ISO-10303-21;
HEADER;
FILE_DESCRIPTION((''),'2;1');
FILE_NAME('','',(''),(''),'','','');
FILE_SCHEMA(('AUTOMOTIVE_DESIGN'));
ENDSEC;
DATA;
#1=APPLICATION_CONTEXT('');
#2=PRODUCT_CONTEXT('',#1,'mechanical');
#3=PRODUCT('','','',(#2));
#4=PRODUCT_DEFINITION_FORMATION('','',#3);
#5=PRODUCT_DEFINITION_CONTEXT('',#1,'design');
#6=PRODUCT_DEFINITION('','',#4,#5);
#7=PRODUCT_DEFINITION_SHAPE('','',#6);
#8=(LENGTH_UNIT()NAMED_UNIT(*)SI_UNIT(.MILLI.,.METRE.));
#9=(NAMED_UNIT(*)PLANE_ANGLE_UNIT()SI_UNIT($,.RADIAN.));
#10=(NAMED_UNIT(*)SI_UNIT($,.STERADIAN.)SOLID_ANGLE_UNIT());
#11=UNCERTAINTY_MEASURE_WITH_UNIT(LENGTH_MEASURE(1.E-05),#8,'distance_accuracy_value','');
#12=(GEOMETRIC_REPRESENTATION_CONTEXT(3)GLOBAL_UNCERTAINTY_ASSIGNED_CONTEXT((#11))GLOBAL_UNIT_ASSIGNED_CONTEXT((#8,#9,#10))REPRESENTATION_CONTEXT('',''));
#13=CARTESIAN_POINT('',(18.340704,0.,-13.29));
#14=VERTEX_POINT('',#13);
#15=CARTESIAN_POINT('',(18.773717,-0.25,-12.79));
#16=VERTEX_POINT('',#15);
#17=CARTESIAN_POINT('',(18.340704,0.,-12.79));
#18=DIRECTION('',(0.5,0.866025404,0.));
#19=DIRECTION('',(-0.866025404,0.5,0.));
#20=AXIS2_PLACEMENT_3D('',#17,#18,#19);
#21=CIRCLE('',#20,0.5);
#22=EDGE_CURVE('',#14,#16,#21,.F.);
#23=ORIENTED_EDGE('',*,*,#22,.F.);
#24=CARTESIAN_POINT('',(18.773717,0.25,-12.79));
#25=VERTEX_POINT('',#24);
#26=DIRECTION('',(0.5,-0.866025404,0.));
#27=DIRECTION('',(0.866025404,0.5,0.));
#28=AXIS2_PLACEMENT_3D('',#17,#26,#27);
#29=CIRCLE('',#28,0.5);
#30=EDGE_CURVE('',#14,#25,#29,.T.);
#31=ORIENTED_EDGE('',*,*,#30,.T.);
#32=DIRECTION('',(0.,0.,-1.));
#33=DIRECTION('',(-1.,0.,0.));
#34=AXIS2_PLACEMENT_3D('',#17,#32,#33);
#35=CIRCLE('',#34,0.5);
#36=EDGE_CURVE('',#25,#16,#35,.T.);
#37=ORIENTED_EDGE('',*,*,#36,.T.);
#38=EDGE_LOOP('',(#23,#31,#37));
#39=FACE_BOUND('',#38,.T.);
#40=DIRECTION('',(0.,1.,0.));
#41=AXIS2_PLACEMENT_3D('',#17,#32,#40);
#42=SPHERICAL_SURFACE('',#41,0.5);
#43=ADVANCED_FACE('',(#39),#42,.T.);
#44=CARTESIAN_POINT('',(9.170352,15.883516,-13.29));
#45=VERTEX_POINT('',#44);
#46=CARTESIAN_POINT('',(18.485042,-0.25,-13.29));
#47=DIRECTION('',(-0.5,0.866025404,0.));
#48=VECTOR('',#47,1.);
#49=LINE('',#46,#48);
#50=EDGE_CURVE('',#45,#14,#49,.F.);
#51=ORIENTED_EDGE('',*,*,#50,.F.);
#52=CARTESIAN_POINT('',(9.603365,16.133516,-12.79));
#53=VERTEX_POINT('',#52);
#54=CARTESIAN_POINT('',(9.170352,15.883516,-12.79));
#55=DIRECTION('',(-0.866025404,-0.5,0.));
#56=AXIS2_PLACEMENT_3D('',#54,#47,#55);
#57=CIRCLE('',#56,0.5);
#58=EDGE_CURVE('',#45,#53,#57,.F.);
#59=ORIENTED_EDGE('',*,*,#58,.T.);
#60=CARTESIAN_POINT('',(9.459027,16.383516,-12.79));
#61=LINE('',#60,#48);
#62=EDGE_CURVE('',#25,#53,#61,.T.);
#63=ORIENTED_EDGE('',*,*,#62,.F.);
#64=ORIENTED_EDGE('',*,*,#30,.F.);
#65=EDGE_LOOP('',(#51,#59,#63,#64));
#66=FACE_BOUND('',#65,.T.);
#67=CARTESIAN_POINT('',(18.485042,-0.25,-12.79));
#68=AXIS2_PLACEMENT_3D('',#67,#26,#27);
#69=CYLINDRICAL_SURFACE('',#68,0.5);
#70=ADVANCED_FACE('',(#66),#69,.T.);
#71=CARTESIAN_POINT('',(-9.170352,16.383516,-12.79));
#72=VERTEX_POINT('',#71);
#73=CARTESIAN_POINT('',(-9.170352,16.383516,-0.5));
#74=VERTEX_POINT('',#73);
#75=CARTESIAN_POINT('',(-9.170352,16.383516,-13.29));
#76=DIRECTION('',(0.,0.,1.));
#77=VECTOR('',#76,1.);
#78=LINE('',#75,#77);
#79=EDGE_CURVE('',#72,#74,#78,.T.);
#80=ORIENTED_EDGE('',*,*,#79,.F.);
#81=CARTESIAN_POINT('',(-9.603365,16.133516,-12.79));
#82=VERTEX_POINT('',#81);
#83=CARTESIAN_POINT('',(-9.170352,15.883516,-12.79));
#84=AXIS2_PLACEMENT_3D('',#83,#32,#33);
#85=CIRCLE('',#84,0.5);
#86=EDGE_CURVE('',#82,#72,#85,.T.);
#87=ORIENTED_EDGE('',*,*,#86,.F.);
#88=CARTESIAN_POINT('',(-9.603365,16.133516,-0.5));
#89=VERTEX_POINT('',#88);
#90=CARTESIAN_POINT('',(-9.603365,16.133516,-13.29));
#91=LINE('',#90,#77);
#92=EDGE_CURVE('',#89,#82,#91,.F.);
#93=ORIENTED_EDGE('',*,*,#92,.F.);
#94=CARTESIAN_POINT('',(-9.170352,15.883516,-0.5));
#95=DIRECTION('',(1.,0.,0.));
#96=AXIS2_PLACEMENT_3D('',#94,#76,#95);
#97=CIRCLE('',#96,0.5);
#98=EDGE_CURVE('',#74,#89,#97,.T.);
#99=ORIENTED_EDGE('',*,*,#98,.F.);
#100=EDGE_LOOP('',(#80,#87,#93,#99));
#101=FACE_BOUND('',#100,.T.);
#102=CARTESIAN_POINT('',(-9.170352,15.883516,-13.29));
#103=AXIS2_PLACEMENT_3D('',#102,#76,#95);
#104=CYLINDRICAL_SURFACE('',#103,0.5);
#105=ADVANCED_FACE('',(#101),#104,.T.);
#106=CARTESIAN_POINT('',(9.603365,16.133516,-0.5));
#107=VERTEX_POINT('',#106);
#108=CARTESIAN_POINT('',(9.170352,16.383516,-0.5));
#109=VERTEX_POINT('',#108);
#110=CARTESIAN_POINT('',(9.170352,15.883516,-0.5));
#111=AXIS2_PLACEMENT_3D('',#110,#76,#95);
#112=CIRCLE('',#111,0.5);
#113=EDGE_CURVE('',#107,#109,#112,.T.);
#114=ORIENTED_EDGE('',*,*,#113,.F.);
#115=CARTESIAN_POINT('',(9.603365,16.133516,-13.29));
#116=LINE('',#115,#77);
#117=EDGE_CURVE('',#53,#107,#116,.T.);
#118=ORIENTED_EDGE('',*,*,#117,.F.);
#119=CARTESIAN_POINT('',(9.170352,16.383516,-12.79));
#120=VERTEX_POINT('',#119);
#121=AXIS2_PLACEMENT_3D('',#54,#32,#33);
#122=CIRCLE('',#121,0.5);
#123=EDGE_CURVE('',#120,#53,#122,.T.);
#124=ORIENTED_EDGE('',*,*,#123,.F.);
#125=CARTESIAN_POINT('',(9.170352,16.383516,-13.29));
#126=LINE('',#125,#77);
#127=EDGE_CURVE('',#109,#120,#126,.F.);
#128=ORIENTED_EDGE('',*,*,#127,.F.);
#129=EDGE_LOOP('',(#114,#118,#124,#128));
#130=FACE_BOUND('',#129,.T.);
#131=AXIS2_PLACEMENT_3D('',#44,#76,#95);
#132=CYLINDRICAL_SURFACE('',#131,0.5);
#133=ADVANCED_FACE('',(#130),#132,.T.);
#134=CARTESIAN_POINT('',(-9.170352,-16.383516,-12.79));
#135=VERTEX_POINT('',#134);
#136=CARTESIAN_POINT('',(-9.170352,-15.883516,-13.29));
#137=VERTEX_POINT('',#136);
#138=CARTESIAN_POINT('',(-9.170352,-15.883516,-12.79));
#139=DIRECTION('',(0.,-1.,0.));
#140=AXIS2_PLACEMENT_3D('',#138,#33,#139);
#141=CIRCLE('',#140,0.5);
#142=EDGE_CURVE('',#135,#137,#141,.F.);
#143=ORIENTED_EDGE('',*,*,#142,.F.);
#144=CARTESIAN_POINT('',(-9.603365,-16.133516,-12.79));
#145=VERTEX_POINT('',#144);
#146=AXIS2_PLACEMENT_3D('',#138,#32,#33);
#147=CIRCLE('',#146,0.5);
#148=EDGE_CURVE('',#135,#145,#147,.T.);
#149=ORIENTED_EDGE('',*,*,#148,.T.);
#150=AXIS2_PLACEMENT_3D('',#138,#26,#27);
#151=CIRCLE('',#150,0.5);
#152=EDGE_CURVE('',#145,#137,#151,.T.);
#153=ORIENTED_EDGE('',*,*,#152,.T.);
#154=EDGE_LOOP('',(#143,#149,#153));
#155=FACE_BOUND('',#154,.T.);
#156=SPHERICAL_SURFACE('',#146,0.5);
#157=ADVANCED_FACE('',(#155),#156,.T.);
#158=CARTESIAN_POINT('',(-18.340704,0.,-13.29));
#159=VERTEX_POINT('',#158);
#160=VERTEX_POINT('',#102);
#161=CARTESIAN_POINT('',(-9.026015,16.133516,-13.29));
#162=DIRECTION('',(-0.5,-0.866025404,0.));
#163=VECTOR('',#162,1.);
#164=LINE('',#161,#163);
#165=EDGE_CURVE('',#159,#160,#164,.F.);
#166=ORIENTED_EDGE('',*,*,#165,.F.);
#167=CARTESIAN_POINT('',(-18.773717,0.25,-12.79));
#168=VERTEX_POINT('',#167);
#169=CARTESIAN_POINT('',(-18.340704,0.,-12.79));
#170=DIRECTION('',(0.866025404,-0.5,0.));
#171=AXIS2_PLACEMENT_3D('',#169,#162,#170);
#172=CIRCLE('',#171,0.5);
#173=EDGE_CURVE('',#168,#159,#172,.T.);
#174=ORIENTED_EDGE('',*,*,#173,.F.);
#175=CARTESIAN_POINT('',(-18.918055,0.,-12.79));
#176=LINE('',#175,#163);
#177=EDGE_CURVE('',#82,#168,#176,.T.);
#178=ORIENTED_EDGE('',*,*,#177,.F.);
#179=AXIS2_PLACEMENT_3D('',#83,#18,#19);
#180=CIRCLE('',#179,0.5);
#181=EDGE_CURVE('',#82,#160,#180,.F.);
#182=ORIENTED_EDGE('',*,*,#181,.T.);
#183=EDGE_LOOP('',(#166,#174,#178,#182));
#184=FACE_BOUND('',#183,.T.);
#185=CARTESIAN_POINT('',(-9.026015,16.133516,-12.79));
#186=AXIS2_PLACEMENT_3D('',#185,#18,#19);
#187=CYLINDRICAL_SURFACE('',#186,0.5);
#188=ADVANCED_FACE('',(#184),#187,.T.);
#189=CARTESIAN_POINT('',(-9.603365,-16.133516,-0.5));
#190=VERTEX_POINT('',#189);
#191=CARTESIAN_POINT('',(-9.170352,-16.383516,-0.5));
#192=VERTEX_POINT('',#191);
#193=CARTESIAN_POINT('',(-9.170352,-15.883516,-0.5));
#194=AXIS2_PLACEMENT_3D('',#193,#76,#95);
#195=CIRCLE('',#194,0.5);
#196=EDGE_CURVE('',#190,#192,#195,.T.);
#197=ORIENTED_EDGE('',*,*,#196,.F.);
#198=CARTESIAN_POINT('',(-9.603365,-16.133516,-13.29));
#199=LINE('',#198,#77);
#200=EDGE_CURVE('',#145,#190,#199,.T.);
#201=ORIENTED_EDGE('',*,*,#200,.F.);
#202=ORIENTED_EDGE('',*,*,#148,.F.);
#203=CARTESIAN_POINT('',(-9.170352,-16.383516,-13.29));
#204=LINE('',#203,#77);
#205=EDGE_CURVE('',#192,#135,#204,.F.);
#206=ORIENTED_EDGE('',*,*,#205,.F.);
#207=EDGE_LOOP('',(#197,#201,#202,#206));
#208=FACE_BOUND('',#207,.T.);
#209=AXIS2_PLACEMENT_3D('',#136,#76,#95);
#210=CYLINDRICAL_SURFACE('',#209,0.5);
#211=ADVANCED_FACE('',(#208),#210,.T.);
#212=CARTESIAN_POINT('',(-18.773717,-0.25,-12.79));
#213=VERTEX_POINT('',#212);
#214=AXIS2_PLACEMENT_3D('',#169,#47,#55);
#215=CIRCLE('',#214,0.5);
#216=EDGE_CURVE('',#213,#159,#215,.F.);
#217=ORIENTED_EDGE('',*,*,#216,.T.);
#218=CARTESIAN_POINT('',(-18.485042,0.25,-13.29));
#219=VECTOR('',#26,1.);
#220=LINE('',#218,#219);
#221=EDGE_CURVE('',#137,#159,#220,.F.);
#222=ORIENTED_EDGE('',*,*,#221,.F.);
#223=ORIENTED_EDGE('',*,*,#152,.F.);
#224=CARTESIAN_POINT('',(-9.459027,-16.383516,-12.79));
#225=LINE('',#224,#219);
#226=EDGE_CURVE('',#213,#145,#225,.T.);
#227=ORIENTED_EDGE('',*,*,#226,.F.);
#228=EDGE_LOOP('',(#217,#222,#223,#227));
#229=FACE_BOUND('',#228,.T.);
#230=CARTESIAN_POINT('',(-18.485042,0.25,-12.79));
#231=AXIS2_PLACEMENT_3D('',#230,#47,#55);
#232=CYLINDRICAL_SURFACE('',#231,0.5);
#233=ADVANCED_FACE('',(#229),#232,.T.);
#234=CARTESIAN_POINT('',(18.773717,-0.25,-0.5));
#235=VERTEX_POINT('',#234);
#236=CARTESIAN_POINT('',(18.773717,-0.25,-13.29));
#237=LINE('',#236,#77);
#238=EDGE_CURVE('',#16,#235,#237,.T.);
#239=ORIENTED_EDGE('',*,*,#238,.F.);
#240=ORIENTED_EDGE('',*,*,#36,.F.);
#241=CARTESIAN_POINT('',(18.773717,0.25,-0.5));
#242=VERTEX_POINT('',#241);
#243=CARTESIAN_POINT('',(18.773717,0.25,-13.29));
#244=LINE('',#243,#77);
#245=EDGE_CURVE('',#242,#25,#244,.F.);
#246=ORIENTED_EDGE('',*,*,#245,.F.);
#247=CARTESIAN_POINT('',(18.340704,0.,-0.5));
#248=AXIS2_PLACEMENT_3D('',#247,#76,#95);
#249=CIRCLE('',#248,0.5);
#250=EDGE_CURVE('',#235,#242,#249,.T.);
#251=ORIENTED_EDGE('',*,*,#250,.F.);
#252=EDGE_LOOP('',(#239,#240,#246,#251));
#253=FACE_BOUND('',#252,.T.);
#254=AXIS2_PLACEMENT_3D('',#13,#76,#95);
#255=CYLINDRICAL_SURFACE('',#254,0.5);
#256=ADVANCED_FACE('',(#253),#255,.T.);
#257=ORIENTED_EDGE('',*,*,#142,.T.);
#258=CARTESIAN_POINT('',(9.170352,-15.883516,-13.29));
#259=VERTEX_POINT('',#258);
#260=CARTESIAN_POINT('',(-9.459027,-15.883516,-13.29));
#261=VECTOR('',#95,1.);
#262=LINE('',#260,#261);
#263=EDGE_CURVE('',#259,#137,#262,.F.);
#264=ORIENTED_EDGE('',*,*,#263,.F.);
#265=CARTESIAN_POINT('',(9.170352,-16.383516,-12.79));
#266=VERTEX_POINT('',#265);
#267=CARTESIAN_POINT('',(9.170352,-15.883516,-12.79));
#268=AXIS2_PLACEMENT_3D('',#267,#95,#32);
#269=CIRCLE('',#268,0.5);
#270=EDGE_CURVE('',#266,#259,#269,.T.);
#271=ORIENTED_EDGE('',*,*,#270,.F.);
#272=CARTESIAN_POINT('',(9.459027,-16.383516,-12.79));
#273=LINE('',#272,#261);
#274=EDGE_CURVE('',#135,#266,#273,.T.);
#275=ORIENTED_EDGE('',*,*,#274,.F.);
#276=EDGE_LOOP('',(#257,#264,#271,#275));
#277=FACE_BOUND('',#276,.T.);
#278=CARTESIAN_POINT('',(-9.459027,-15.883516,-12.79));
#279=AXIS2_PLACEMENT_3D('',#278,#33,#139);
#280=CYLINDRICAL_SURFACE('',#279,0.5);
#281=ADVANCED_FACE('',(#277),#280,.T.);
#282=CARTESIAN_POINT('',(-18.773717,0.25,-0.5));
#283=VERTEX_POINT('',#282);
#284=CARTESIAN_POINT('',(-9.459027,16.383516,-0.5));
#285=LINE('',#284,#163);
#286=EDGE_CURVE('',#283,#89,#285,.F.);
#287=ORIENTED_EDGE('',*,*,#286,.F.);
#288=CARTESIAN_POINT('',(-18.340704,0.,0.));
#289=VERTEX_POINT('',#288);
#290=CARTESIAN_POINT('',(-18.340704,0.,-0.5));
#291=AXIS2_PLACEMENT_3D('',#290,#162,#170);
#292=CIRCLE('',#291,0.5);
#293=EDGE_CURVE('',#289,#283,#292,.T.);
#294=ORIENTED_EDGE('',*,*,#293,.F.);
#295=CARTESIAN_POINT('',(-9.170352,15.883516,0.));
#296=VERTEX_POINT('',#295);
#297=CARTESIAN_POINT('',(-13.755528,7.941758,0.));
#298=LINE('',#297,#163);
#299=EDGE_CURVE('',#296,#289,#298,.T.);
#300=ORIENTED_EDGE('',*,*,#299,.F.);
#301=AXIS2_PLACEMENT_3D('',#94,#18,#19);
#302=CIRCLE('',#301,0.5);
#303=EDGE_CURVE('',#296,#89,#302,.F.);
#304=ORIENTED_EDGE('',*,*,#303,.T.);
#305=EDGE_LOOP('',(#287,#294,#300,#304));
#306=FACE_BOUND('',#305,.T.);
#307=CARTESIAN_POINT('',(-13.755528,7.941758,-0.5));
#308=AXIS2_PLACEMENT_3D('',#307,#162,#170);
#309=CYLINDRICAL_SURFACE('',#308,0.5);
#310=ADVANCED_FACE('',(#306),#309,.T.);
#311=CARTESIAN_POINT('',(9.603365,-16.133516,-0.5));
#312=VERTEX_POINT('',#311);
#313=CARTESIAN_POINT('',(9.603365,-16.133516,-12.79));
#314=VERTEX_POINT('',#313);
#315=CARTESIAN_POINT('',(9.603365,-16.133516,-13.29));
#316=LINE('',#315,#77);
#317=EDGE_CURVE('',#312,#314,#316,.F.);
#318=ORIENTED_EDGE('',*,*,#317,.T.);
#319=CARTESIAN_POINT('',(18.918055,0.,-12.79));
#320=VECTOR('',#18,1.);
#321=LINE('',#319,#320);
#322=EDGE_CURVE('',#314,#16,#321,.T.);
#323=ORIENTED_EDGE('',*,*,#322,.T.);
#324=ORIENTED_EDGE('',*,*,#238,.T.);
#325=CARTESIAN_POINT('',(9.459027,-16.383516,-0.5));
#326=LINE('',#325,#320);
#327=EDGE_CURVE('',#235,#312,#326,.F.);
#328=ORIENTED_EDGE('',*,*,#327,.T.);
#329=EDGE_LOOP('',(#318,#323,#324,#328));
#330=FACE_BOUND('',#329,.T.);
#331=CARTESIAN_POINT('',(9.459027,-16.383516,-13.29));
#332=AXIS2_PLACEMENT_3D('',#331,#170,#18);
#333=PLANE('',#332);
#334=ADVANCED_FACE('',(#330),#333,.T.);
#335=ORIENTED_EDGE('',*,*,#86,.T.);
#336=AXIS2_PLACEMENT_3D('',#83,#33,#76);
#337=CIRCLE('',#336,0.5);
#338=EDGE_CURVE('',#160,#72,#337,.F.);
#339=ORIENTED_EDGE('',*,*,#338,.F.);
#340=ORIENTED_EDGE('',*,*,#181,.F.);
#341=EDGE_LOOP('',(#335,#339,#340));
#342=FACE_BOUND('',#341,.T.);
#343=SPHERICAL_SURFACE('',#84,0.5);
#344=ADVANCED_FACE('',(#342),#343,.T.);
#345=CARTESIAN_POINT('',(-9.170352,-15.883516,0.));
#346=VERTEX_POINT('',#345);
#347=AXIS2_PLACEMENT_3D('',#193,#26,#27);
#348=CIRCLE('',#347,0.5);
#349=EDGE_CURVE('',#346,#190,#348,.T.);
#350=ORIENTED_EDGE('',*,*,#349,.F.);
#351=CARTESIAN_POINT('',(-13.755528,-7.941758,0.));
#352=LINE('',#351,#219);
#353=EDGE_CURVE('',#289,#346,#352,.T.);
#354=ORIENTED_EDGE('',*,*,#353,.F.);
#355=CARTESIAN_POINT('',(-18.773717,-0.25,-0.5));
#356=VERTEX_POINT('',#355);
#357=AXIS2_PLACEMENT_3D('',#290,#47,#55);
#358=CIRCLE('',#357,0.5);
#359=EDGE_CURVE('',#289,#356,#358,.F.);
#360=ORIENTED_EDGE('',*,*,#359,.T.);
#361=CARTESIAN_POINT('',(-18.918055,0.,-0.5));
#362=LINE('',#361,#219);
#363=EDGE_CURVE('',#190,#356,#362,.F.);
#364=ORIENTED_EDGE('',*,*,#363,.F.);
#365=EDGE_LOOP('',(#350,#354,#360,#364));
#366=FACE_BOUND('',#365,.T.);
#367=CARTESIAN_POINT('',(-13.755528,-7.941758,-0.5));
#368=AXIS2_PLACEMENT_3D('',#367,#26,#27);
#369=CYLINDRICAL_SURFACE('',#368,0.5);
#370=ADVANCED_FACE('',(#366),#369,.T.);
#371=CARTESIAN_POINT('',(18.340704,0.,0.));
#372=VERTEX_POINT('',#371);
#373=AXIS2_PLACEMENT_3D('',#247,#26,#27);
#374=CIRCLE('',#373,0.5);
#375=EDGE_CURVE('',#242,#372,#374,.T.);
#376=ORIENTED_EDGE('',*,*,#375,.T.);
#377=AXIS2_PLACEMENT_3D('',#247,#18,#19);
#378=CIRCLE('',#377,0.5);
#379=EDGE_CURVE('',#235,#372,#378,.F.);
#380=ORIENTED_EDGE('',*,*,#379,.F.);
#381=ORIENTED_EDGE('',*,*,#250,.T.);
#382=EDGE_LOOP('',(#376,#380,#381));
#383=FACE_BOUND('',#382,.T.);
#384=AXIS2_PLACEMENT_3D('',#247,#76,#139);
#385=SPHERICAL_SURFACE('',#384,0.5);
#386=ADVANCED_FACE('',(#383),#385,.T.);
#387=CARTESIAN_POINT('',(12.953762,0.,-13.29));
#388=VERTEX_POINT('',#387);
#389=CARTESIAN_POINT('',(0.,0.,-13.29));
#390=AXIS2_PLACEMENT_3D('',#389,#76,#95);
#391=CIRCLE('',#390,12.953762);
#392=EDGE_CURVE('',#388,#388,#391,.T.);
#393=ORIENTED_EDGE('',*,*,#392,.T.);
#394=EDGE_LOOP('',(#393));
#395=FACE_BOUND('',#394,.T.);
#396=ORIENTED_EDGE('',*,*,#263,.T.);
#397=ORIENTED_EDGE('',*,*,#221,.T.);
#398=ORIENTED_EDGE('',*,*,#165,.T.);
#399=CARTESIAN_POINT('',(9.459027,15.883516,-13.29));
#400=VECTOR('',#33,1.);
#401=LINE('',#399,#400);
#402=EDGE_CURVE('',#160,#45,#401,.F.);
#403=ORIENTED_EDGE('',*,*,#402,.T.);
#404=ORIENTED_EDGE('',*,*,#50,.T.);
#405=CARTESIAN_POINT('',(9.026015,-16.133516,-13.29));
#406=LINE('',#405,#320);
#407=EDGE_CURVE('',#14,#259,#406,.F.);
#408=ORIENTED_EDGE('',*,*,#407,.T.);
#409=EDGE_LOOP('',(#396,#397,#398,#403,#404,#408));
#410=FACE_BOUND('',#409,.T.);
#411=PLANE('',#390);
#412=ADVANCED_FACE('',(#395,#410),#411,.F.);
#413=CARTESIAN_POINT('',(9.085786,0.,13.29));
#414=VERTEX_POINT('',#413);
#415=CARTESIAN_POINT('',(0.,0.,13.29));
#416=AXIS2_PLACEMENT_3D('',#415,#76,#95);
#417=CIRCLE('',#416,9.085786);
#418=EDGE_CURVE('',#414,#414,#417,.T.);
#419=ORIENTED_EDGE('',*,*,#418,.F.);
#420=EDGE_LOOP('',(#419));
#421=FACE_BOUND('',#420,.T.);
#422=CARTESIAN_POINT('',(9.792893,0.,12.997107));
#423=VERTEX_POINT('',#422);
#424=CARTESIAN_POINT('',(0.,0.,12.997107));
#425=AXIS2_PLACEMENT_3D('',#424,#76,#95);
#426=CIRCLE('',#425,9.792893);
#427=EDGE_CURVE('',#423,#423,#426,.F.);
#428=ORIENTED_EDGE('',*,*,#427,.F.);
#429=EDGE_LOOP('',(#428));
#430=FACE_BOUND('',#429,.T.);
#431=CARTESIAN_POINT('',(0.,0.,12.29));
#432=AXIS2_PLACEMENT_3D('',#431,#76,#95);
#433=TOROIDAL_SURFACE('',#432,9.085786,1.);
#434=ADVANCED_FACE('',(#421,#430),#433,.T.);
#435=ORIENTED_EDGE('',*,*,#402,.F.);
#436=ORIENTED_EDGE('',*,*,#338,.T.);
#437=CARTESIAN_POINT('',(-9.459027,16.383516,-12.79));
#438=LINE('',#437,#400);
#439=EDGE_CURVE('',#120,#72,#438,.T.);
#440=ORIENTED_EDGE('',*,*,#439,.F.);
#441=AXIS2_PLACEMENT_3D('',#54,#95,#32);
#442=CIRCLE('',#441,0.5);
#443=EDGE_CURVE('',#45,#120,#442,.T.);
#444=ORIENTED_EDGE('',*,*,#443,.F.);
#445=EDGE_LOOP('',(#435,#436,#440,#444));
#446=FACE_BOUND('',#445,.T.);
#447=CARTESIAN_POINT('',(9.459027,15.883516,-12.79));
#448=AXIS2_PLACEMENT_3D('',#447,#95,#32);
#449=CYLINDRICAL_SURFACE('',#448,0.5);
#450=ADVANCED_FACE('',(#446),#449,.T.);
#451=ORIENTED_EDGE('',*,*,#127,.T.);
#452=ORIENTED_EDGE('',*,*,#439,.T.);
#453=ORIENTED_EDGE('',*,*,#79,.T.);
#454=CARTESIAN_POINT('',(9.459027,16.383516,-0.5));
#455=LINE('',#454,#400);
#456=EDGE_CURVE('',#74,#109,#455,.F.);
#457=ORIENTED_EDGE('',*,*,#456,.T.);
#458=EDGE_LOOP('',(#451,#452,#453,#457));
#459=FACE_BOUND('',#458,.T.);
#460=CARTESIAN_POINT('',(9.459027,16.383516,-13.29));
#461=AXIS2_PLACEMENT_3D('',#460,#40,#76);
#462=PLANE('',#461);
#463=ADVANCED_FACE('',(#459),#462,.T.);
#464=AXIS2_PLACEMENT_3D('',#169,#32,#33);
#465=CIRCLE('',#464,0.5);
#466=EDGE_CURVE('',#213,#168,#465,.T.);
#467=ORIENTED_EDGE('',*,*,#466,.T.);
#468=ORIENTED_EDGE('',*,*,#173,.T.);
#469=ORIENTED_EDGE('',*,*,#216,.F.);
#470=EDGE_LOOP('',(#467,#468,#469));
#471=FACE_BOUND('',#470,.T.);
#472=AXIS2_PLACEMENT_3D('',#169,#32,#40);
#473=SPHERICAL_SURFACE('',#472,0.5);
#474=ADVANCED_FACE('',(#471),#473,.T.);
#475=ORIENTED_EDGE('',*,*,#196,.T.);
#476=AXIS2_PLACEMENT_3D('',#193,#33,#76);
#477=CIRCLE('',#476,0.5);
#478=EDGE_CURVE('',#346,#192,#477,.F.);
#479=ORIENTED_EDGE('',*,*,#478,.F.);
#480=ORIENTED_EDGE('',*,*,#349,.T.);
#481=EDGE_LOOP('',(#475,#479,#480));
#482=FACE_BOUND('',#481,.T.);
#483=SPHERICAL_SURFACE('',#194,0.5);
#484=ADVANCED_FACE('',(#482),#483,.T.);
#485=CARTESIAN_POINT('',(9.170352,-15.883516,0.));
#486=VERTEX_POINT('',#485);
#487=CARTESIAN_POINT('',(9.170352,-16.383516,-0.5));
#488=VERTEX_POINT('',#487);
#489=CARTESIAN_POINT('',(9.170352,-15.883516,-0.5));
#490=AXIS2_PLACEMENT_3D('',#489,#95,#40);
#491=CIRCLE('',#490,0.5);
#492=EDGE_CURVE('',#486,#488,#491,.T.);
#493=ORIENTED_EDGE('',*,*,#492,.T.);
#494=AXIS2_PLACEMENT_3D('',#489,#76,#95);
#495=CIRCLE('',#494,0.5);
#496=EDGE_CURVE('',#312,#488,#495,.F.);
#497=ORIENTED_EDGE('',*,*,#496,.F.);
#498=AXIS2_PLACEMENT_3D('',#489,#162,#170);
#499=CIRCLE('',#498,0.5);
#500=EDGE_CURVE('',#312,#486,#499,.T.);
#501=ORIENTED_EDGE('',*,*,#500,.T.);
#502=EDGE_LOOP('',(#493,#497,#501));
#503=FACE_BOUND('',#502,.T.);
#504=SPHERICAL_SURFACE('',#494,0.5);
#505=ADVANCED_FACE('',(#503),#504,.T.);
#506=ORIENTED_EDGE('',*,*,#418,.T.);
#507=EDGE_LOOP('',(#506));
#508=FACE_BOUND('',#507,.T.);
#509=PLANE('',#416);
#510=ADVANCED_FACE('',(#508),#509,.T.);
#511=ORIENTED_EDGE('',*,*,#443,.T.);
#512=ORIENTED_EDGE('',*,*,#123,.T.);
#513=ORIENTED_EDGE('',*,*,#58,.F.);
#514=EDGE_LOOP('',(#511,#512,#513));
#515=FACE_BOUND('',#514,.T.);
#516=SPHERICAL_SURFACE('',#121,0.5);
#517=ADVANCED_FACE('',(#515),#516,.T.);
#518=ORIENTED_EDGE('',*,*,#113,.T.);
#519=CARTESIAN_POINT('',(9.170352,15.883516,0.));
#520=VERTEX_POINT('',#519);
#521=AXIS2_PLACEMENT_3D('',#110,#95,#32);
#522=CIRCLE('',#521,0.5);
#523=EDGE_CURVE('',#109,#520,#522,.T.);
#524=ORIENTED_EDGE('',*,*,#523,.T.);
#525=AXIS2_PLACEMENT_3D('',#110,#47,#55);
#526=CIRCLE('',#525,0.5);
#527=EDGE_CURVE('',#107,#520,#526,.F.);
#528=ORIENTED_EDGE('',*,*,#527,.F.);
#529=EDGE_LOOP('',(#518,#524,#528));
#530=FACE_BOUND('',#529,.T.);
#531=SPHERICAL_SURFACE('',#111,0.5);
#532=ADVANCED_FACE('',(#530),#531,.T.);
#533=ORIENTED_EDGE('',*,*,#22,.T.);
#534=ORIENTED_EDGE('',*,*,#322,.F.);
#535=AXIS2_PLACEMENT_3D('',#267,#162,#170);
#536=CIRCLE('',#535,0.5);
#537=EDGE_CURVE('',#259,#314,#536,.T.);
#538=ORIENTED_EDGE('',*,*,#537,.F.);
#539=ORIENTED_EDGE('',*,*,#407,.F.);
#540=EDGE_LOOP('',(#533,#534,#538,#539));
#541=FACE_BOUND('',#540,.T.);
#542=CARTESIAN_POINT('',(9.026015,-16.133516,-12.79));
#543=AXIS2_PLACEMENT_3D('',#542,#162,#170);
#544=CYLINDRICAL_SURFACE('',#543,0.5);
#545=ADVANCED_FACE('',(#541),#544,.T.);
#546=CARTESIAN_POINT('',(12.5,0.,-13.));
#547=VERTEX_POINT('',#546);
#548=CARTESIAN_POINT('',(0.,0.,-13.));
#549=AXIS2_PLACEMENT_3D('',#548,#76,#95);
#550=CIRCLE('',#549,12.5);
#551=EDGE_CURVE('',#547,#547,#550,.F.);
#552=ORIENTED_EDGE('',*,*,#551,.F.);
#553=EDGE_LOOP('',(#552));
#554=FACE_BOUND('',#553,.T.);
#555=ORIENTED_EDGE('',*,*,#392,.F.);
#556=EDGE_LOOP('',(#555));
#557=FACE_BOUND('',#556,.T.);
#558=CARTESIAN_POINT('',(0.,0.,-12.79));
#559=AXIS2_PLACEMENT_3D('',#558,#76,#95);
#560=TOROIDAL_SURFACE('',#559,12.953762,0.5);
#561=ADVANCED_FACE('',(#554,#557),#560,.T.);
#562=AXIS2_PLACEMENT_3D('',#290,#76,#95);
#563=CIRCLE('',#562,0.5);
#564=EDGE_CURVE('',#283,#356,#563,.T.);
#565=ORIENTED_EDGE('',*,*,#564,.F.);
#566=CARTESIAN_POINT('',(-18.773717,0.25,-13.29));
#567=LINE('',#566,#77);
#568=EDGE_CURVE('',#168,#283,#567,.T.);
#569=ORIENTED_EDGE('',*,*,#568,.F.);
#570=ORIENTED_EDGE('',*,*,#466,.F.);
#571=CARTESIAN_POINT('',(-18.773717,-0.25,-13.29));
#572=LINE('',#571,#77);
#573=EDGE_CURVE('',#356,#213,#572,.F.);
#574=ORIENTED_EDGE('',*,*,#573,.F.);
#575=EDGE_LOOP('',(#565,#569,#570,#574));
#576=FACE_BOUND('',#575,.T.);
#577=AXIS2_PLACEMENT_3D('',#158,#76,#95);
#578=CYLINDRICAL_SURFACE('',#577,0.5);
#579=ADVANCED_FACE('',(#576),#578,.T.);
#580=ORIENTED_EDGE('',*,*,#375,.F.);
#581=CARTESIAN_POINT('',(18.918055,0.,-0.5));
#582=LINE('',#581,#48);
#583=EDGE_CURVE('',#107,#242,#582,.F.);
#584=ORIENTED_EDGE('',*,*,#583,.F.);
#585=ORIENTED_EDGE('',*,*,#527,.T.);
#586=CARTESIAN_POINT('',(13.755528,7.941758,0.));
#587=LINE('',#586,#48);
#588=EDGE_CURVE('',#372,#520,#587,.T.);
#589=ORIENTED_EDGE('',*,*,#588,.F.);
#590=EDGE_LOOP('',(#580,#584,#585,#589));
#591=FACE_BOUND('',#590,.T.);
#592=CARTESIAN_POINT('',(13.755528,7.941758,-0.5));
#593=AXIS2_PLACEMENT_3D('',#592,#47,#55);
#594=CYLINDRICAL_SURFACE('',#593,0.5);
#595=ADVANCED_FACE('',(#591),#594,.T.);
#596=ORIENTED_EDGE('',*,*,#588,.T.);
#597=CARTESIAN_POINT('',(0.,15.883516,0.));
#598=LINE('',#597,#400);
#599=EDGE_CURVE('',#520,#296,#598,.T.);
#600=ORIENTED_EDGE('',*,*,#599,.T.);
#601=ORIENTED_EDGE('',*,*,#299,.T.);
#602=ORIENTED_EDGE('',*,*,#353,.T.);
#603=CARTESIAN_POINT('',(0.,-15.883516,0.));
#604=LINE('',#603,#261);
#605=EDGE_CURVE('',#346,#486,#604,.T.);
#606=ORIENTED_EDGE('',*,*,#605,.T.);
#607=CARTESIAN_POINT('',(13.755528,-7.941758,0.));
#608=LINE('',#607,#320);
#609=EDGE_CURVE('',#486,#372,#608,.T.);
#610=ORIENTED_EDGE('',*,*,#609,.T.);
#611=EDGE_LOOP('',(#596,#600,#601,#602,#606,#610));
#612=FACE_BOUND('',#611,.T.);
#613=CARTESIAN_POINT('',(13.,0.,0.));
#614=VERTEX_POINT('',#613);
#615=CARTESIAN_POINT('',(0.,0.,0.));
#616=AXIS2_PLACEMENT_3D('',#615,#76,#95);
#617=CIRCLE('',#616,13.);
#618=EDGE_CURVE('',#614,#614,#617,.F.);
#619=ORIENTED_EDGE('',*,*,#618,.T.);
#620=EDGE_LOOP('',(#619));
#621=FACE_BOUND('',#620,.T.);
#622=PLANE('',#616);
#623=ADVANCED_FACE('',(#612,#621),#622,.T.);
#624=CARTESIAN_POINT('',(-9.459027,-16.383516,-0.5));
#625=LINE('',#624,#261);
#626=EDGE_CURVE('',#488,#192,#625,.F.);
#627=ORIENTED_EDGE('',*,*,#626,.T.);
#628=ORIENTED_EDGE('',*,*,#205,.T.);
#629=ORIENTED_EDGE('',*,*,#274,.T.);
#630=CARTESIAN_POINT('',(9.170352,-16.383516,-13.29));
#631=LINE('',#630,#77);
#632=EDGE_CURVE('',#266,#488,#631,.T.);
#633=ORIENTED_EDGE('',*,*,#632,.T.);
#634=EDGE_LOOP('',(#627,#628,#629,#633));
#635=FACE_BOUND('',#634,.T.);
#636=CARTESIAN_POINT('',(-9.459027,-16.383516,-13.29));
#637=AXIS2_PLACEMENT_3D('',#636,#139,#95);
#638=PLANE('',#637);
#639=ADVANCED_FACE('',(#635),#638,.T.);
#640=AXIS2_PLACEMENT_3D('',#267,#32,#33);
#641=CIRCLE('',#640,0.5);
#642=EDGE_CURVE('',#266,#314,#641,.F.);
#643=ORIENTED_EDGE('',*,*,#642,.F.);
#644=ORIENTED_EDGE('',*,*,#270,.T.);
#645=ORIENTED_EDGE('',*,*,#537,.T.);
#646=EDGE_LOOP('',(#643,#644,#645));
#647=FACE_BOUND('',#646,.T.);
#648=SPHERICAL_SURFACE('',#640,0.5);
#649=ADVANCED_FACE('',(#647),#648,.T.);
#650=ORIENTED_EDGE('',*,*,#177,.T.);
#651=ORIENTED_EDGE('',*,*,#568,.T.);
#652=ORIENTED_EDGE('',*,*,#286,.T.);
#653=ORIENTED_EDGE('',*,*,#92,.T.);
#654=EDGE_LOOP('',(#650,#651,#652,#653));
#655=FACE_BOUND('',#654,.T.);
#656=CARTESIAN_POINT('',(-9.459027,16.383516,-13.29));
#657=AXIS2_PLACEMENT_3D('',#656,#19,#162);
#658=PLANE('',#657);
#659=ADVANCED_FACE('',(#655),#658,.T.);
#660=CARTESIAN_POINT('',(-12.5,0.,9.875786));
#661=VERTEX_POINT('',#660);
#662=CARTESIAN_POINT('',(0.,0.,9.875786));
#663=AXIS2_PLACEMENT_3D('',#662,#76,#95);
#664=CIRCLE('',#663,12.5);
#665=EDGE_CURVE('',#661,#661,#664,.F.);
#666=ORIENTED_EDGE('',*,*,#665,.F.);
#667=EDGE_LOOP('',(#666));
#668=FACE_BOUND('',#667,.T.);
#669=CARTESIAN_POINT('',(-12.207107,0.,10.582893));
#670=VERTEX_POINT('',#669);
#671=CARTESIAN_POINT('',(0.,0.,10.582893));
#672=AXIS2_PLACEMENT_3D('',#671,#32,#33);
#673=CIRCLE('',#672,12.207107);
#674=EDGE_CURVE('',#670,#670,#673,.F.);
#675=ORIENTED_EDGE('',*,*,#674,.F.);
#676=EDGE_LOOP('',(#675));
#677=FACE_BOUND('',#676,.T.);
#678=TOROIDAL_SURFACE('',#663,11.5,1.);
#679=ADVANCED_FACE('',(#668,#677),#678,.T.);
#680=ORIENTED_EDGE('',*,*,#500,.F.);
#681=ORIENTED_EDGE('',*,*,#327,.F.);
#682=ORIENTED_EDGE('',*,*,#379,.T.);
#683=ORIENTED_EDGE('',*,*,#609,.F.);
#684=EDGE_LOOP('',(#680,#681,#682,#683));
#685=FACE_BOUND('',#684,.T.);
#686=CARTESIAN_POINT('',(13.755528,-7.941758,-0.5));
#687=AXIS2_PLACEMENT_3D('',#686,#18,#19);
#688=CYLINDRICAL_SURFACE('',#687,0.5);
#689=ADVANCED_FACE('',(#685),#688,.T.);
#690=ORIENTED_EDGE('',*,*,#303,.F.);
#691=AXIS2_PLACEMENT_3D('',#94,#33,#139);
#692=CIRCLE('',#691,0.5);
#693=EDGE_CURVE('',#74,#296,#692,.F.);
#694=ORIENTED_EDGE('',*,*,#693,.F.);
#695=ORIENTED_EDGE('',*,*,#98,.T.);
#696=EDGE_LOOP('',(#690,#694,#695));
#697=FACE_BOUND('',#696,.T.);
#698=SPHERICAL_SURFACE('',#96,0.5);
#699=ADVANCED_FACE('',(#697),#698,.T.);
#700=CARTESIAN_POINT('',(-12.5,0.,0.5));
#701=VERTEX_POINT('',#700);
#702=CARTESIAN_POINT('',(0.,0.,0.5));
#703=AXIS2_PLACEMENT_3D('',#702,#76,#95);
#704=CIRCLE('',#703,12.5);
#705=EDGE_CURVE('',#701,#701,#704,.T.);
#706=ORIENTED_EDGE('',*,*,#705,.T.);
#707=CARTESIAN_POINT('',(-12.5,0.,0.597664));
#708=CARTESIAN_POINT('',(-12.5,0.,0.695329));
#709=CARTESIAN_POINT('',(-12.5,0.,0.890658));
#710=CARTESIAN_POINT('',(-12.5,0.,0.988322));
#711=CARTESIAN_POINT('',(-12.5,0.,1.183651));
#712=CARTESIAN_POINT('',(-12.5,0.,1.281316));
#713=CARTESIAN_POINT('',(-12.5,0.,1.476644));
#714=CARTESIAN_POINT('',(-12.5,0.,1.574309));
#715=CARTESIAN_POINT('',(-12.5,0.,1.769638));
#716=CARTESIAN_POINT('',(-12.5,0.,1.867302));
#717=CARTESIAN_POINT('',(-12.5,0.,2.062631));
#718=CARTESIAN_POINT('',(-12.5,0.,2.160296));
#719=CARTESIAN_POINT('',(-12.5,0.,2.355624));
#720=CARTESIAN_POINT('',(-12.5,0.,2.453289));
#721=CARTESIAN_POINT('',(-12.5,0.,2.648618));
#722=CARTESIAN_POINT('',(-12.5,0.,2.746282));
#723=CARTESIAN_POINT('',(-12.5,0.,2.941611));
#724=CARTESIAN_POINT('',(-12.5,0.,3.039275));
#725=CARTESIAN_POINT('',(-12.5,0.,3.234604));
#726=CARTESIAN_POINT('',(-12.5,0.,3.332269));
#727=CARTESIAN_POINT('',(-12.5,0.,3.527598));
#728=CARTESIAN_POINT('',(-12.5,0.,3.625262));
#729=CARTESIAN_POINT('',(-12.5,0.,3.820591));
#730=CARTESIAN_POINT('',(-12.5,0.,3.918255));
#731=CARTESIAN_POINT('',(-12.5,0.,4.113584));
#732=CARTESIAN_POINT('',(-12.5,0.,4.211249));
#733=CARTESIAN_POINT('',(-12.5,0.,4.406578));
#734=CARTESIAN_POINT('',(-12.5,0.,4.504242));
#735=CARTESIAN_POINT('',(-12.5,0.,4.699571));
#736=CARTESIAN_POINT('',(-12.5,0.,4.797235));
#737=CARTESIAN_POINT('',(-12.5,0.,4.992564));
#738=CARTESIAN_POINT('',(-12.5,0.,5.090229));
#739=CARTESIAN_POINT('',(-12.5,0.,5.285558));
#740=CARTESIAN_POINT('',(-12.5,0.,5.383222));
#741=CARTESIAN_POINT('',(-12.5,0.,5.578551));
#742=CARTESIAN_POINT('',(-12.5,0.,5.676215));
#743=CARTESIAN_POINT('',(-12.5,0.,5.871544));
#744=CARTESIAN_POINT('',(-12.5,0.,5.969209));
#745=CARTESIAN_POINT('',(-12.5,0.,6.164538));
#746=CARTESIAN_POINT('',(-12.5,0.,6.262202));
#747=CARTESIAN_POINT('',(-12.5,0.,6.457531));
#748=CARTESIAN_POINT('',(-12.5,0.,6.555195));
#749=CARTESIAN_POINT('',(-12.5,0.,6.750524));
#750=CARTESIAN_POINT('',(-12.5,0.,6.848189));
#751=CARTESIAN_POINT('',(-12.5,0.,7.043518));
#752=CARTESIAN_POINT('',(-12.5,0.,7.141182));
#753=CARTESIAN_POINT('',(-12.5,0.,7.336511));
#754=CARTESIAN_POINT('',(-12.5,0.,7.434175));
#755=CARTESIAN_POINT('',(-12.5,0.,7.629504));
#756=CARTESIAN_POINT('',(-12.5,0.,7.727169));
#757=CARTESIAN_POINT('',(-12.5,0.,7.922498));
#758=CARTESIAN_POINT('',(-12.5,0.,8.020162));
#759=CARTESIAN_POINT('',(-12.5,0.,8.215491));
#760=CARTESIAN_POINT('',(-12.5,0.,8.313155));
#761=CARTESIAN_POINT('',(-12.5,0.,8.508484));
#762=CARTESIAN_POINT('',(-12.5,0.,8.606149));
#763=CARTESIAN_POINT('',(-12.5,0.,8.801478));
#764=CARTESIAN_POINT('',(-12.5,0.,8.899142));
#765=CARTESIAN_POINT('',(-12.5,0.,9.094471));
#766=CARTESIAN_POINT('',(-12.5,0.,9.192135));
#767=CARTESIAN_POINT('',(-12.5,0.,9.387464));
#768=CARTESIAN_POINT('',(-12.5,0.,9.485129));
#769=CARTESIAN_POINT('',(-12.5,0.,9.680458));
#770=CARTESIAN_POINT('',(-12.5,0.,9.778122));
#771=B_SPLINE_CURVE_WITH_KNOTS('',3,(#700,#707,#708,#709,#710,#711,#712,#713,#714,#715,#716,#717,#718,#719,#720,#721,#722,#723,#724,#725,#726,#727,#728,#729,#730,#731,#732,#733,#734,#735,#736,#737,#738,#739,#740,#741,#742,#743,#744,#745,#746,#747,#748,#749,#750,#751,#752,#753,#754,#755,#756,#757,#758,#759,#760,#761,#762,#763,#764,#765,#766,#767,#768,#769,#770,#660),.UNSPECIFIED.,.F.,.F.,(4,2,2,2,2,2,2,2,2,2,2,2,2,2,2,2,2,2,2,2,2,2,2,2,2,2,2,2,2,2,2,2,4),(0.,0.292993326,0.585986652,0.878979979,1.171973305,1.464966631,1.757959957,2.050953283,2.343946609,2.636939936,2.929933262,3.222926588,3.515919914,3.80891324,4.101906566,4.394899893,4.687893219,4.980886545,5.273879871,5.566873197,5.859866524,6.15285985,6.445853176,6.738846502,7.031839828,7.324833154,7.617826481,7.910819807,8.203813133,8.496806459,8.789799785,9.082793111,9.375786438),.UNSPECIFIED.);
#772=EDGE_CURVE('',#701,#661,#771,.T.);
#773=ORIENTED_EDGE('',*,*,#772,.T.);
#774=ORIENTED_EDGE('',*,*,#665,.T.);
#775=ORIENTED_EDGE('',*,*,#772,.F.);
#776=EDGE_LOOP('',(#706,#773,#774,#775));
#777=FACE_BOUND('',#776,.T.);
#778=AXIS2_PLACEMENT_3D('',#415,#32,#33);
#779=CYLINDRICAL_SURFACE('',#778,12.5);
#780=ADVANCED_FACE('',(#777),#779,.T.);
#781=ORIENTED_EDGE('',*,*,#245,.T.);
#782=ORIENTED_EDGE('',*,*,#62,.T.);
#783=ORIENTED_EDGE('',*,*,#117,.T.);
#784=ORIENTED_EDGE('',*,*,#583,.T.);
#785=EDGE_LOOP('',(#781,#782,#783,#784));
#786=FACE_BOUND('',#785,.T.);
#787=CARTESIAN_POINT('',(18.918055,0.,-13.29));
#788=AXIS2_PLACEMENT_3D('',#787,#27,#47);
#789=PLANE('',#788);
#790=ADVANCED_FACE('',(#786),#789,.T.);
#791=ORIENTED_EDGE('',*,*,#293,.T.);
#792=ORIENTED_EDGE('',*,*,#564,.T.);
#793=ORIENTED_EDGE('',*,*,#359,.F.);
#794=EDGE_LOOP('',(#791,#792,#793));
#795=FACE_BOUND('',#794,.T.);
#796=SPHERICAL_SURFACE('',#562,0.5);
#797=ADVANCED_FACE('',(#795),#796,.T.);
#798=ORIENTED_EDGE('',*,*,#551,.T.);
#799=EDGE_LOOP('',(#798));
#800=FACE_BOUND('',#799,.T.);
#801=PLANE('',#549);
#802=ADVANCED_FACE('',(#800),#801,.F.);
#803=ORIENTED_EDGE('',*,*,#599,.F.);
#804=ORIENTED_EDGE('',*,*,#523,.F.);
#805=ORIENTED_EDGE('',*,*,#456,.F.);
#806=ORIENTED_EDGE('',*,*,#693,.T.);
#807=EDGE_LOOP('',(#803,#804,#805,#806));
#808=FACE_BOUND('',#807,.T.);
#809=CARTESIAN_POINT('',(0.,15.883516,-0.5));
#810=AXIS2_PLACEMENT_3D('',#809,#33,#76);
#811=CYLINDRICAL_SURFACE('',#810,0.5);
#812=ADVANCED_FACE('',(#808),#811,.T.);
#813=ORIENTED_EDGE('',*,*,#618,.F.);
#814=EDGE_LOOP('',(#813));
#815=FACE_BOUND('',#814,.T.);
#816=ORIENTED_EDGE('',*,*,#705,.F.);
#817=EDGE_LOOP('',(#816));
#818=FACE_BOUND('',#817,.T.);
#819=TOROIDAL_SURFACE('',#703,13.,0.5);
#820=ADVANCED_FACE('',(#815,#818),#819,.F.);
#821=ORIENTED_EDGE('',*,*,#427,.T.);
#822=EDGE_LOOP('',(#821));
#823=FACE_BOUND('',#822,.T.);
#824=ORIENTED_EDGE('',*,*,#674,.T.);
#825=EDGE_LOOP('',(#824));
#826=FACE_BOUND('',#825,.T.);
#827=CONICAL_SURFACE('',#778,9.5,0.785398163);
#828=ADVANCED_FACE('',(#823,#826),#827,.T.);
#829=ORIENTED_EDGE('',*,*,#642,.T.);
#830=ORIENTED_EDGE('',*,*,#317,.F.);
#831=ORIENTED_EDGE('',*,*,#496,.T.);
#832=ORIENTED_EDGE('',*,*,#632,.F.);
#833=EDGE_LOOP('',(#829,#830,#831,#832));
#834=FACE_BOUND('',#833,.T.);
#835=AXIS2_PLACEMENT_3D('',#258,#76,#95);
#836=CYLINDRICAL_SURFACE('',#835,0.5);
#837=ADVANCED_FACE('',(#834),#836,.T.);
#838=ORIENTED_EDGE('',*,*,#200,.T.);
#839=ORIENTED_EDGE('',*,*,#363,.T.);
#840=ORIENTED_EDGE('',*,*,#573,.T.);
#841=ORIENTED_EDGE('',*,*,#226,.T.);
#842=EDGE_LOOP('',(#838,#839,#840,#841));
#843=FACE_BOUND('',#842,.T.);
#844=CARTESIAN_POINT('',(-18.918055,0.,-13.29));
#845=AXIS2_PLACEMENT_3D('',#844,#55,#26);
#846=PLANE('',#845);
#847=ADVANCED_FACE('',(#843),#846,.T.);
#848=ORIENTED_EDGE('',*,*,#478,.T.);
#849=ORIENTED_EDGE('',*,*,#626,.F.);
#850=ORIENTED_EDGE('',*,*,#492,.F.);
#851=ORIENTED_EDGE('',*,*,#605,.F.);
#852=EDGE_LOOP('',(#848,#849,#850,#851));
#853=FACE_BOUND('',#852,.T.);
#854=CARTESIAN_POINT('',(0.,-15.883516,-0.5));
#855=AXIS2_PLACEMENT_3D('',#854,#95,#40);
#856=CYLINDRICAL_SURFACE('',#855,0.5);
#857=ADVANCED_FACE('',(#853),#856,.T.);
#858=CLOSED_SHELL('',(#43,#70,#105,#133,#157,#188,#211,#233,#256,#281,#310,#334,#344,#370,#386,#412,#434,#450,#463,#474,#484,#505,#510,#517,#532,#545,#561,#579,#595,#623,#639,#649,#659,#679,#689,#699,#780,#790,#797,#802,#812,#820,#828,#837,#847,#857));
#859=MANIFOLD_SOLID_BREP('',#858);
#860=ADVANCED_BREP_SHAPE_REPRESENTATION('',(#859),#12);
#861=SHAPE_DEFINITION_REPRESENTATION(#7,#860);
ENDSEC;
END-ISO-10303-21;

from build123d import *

# Parameters (mm, degrees)
SKETCH1_R           = 12.5
BOSS_EXTRUDE1_DEPTH = 13.29
SKETCH2_R           = 12.5
BOSS_EXTRUDE2_DEPTH = 13
BOSS_EXTRUDE3_START = 13.29
SKETCH2_2_R         = 12.5
BOSS_EXTRUDE3_DEPTH = 13.29
CHAMFER1_SIZE       = 3
FILLET1_R           = 1
FILLET2_R           = 0.5
FILLET3_R           = 0.5


with BuildPart() as part:
    # Sketch1 → Boss-Extrude1 (new body)
    with BuildSketch(Plane.XY):
        Polygon((18.918054635, 0), (9.459027317, 16.383515904), (-9.459027317, 16.383515904), (-18.918054635, 0), (-9.459027317, -16.383515904), (9.459027317, -16.383515904), align=None)
        Circle(SKETCH1_R, mode=Mode.SUBTRACT)
    extrude(amount=-BOSS_EXTRUDE1_DEPTH)

    # Sketch2 → Boss-Extrude2 (add)
    with BuildSketch(Plane.XY):
        Circle(SKETCH2_R)
    extrude(amount=-BOSS_EXTRUDE2_DEPTH)

    # Sketch2<2> → Boss-Extrude3 (add)
    with BuildSketch(Plane.XY.offset(BOSS_EXTRUDE3_START)):
        Circle(SKETCH2_2_R)
    extrude(amount=-BOSS_EXTRUDE3_DEPTH)

    # Chamfer1
    chamfer1_edges = [part.edges().sort_by_distance(p)[0] for p in [
        (-12.5, 0, 13.29),
    ]]
    chamfer(chamfer1_edges, length=CHAMFER1_SIZE)

    # Fillet1
    fillet1_edges = [part.edges().sort_by_distance(p)[0] for p in [
        (-9.5, 0, 13.29),
        (-12.5, 0, 10.29),
    ]]
    fillet(fillet1_edges, radius=FILLET1_R)

    # Fillet2
    # the kernel refuses this fillet: 0.5 mm, written as the material it takes off along each edge
    with BuildSketch(Plane(origin=(9.170352183, -15.883515904, -0.5), x_dir=(0.866025403784439, -0.4999999999999994, 0), z_dir=(0, 0, 1))) as fillet2_piece_1_section:
        Polygon((0, 0), (FILLET2_R * 1.02, 0), (FILLET2_R * 1.02, -FILLET2_R * 0.588897274573), (FILLET2_R * 0.51, -FILLET2_R * 0.88334591186), align=None)
    fillet2_piece_1 = extrude(amount=FILLET2_R * 1.02, mode=Mode.PRIVATE)
    fillet2_piece_1 = fillet2_piece_1 - Plane(origin=(9.170352183, -15.883515904, -0.5), x_dir=(-0.5000000000000004, 0.8660254037844384, 0), z_dir=(0, 0, 1)) * Sphere(FILLET2_R, mode=Mode.PRIVATE)
    add(fillet2_piece_1, mode=Mode.SUBTRACT)
    with BuildSketch(Plane(origin=(9.170352183, -15.883515904, -12.79), x_dir=(0.866025403784439, -0.4999999999999994, 0), z_dir=(0, 0, -1))) as fillet2_piece_2_section:
        Polygon((0, 0), (FILLET2_R * 1.02, 0), (FILLET2_R * 1.02, FILLET2_R * 0.588897274573), (FILLET2_R * 0.51, FILLET2_R * 0.88334591186), align=None)
    fillet2_piece_2 = extrude(amount=FILLET2_R * 1.02, mode=Mode.PRIVATE)
    fillet2_piece_2 = fillet2_piece_2 - Plane(origin=(9.170352183, -15.883515904, -12.79), x_dir=(-0.5000000000000004, 0.8660254037844384, 0), z_dir=(0, 0, -1)) * Sphere(FILLET2_R, mode=Mode.PRIVATE)
    add(fillet2_piece_2, mode=Mode.SUBTRACT)
    with BuildSketch(Plane(origin=(-9.170352183, -15.883515904, -0.5), x_dir=(0, -1, 0), z_dir=(0, 0, 1))) as fillet2_piece_3_section:
        Polygon((0, 0), (FILLET2_R * 1.02, 0), (FILLET2_R * 1.02, -FILLET2_R * 0.588897274573), (FILLET2_R * 0.51, -FILLET2_R * 0.88334591186), align=None)
    fillet2_piece_3 = extrude(amount=FILLET2_R * 1.02, mode=Mode.PRIVATE)
    fillet2_piece_3 = fillet2_piece_3 - Plane(origin=(-9.170352183, -15.883515904, -0.5), x_dir=(0.49999999999999983, 0.8660254037844387, 0), z_dir=(0, 0, 1)) * Sphere(FILLET2_R, mode=Mode.PRIVATE)
    add(fillet2_piece_3, mode=Mode.SUBTRACT)
    with BuildSketch(Plane(origin=(-9.170352183, -15.883515904, -12.79), x_dir=(0, -1, 0), z_dir=(0, 0, -1))) as fillet2_piece_4_section:
        Polygon((0, 0), (FILLET2_R * 1.02, 0), (FILLET2_R * 1.02, FILLET2_R * 0.588897274573), (FILLET2_R * 0.51, FILLET2_R * 0.88334591186), align=None)
    fillet2_piece_4 = extrude(amount=FILLET2_R * 1.02, mode=Mode.PRIVATE)
    fillet2_piece_4 = fillet2_piece_4 - Plane(origin=(-9.170352183, -15.883515904, -12.79), x_dir=(0.49999999999999983, 0.8660254037844387, 0), z_dir=(0, 0, -1)) * Sphere(FILLET2_R, mode=Mode.PRIVATE)
    add(fillet2_piece_4, mode=Mode.SUBTRACT)
    with BuildSketch(Plane(origin=(-18.340704365, 0, -0.5), x_dir=(-0.8660254037844388, 0.49999999999999967, 0), z_dir=(0, 0, 1))) as fillet2_piece_5_section:
        Polygon((0, 0), (FILLET2_R * 1.02, 0), (FILLET2_R * 1.02, FILLET2_R * 0.588897274573), (FILLET2_R * 0.51, FILLET2_R * 0.88334591186), align=None)
    fillet2_piece_5 = extrude(amount=FILLET2_R * 1.02, mode=Mode.PRIVATE)
    fillet2_piece_5 = fillet2_piece_5 - Plane(origin=(-18.340704365, 0, -0.5), x_dir=(1, 0, 0), z_dir=(0, 0, 1)) * Sphere(FILLET2_R, mode=Mode.PRIVATE)
    add(fillet2_piece_5, mode=Mode.SUBTRACT)
    with BuildSketch(Plane(origin=(-18.340704365, 0, -12.79), x_dir=(-0.8660254037844388, 0.49999999999999967, 0), z_dir=(0, 0, -1))) as fillet2_piece_6_section:
        Polygon((0, 0), (FILLET2_R * 1.02, 0), (FILLET2_R * 1.02, -FILLET2_R * 0.588897274573), (FILLET2_R * 0.51, -FILLET2_R * 0.88334591186), align=None)
    fillet2_piece_6 = extrude(amount=FILLET2_R * 1.02, mode=Mode.PRIVATE)
    fillet2_piece_6 = fillet2_piece_6 - Plane(origin=(-18.340704365, 0, -12.79), x_dir=(1, 0, 0), z_dir=(0, 0, -1)) * Sphere(FILLET2_R, mode=Mode.PRIVATE)
    add(fillet2_piece_6, mode=Mode.SUBTRACT)
    with BuildSketch(Plane(origin=(-9.170352183, 15.883515904, -0.5), x_dir=(0, 1, 0), z_dir=(0, 0, 1))) as fillet2_piece_7_section:
        Polygon((0, 0), (FILLET2_R * 1.02, 0), (FILLET2_R * 1.02, FILLET2_R * 0.588897274573), (FILLET2_R * 0.51, FILLET2_R * 0.88334591186), align=None)
    fillet2_piece_7 = extrude(amount=FILLET2_R * 1.02, mode=Mode.PRIVATE)
    fillet2_piece_7 = fillet2_piece_7 - Plane(origin=(-9.170352183, 15.883515904, -0.5), x_dir=(0.5000000000000002, -0.8660254037844386, 0), z_dir=(0, 0, 1)) * Sphere(FILLET2_R, mode=Mode.PRIVATE)
    add(fillet2_piece_7, mode=Mode.SUBTRACT)
    with BuildSketch(Plane(origin=(-9.170352183, 15.883515904, -12.79), x_dir=(0, 1, 0), z_dir=(0, 0, -1))) as fillet2_piece_8_section:
        Polygon((0, 0), (FILLET2_R * 1.02, 0), (FILLET2_R * 1.02, -FILLET2_R * 0.588897274573), (FILLET2_R * 0.51, -FILLET2_R * 0.88334591186), align=None)
    fillet2_piece_8 = extrude(amount=FILLET2_R * 1.02, mode=Mode.PRIVATE)
    fillet2_piece_8 = fillet2_piece_8 - Plane(origin=(-9.170352183, 15.883515904, -12.79), x_dir=(0.5000000000000002, -0.8660254037844386, 0), z_dir=(0, 0, -1)) * Sphere(FILLET2_R, mode=Mode.PRIVATE)
    add(fillet2_piece_8, mode=Mode.SUBTRACT)
    with BuildSketch(Plane(origin=(9.170352183, 15.883515904, -0.5), x_dir=(0.8660254037844384, 0.5000000000000006, 0), z_dir=(0, 0, 1))) as fillet2_piece_9_section:
        Polygon((0, 0), (FILLET2_R * 1.02, 0), (FILLET2_R * 1.02, FILLET2_R * 0.588897274573), (FILLET2_R * 0.51, FILLET2_R * 0.88334591186), align=None)
    fillet2_piece_9 = extrude(amount=FILLET2_R * 1.02, mode=Mode.PRIVATE)
    fillet2_piece_9 = fillet2_piece_9 - Plane(origin=(9.170352183, 15.883515904, -0.5), x_dir=(-0.4999999999999997, -0.8660254037844387, 0), z_dir=(0, 0, 1)) * Sphere(FILLET2_R, mode=Mode.PRIVATE)
    add(fillet2_piece_9, mode=Mode.SUBTRACT)
    with BuildSketch(Plane(origin=(9.170352183, 15.883515904, -12.79), x_dir=(0.8660254037844384, 0.5000000000000006, 0), z_dir=(0, 0, -1))) as fillet2_piece_10_section:
        Polygon((0, 0), (FILLET2_R * 1.02, 0), (FILLET2_R * 1.02, -FILLET2_R * 0.588897274573), (FILLET2_R * 0.51, -FILLET2_R * 0.88334591186), align=None)
    fillet2_piece_10 = extrude(amount=FILLET2_R * 1.02, mode=Mode.PRIVATE)
    fillet2_piece_10 = fillet2_piece_10 - Plane(origin=(9.170352183, 15.883515904, -12.79), x_dir=(-0.4999999999999997, -0.8660254037844387, 0), z_dir=(0, 0, -1)) * Sphere(FILLET2_R, mode=Mode.PRIVATE)
    add(fillet2_piece_10, mode=Mode.SUBTRACT)
    with BuildSketch(Plane(origin=(18.340704365, 0, -0.5), x_dir=(0.8660254037844384, 0.5000000000000006, 0), z_dir=(0, 0, 1))) as fillet2_piece_11_section:
        Polygon((0, 0), (FILLET2_R * 1.02, 0), (FILLET2_R * 1.02, -FILLET2_R * 0.588897274573), (FILLET2_R * 0.51, -FILLET2_R * 0.88334591186), align=None)
    fillet2_piece_11 = extrude(amount=FILLET2_R * 1.02, mode=Mode.PRIVATE)
    fillet2_piece_11 = fillet2_piece_11 - Plane(origin=(18.340704365, 0, -0.5), x_dir=(-1, 0, 0), z_dir=(0, 0, 1)) * Sphere(FILLET2_R, mode=Mode.PRIVATE)
    add(fillet2_piece_11, mode=Mode.SUBTRACT)
    with BuildSketch(Plane(origin=(18.340704365, 0, -12.79), x_dir=(0.8660254037844384, 0.5000000000000006, 0), z_dir=(0, 0, -1))) as fillet2_piece_12_section:
        Polygon((0, 0), (FILLET2_R * 1.02, 0), (FILLET2_R * 1.02, FILLET2_R * 0.588897274573), (FILLET2_R * 0.51, FILLET2_R * 0.88334591186), align=None)
    fillet2_piece_12 = extrude(amount=FILLET2_R * 1.02, mode=Mode.PRIVATE)
    fillet2_piece_12 = fillet2_piece_12 - Plane(origin=(18.340704365, 0, -12.79), x_dir=(-1, 0, 0), z_dir=(0, 0, -1)) * Sphere(FILLET2_R, mode=Mode.PRIVATE)
    add(fillet2_piece_12, mode=Mode.SUBTRACT)
    with BuildSketch(Plane(origin=(9.459027317, -16.383515904, -0.5), x_dir=(0.499999999999998, 0.8660254037844398, 0), z_dir=(0, 0, -1)), Plane(origin=(-9.459027317, -16.383515904, -0.5), x_dir=(1, 0, 0), z_dir=(0, 0, -1)), Plane(origin=(18.918054635, 0, -0.5), x_dir=(-0.500000000000001, 0.8660254037844382, 0), z_dir=(0, 0, -1))) as fillet2_piece_13:
        with BuildLine():
            CenterArc((FILLET2_R * 0.57735026919, -FILLET2_R), FILLET2_R, 90, 60)
            Line((-FILLET2_R * 0.288675134595, -FILLET2_R * 0.5), (-FILLET2_R * 0.305995642671, -FILLET2_R * 0.49))
            Line((-FILLET2_R * 0.305995642671, -FILLET2_R * 0.49), (-FILLET2_R * 0.0115470053838, FILLET2_R * 0.02))
            Line((-FILLET2_R * 0.0115470053838, FILLET2_R * 0.02), (FILLET2_R * 0.57735026919, FILLET2_R * 0.02))
            Line((FILLET2_R * 0.57735026919, FILLET2_R * 0.02), (FILLET2_R * 0.57735026919, 0))
        make_face()
    extrude(amount=12.29, mode=Mode.SUBTRACT)
    with BuildSketch(Plane(origin=(-18.918054635, 0, -0.5), x_dir=(0.49999999999999345, 0.8660254037844424, 0), z_dir=(0, 0, -1)), Plane(origin=(-9.459027317, 16.383515904, -0.5), x_dir=(1, 0, 0), z_dir=(0, 0, -1)), Plane(origin=(9.459027317, 16.383515904, -0.5), x_dir=(0.499999999999998, -0.8660254037844398, 0), z_dir=(0, 0, -1))) as fillet2_piece_14:
        with BuildLine():
            CenterArc((FILLET2_R * 0.57735026919, FILLET2_R), FILLET2_R, 210, 60)
            Line((-FILLET2_R * 0.288675134595, FILLET2_R * 0.5), (-FILLET2_R * 0.30599564267, FILLET2_R * 0.49))
            Line((-FILLET2_R * 0.30599564267, FILLET2_R * 0.49), (-FILLET2_R * 0.0115470053838, -FILLET2_R * 0.02))
            Line((-FILLET2_R * 0.0115470053838, -FILLET2_R * 0.02), (FILLET2_R * 0.57735026919, -FILLET2_R * 0.02))
            Line((FILLET2_R * 0.57735026919, -FILLET2_R * 0.02), (FILLET2_R * 0.57735026919, 0))
        make_face()
    extrude(amount=12.29, mode=Mode.SUBTRACT)
    with BuildSketch(Plane(origin=(9.170352183, 16.383515904, -13.29), x_dir=(0, 0, 1), z_dir=(-1, 0, 0)), Plane(origin=(-9.603364885, 16.133515904, -13.29), x_dir=(0, 0, 1), z_dir=(-0.4999999999999997, -0.8660254037844389, 0)), Plane(origin=(-18.773717067, -0.25, -13.29), x_dir=(0, 0, 1), z_dir=(0.5000000000000002, -0.8660254037844386, 0)), Plane(origin=(-9.170352183, -16.383515904, -13.29), x_dir=(0, 0, 1), z_dir=(1, 0, 0)), Plane(origin=(9.603364885, -16.133515904, -13.29), x_dir=(0, 0, 1), z_dir=(0.4999999999999994, 0.866025403784439, 0)), Plane(origin=(-9.170352183, -16.383515904, 0), x_dir=(0, 1, 0), z_dir=(1, 0, 0)), Plane(origin=(-18.773717067, -0.25, 0), x_dir=(0.8660254037844386, 0.5000000000000002, 0), z_dir=(0.5000000000000002, -0.8660254037844386, 0)), Plane(origin=(-9.603364885, 16.133515904, 0), x_dir=(0.8660254037844388, -0.49999999999999967, 0), z_dir=(-0.4999999999999997, -0.8660254037844389, 0)), Plane(origin=(9.170352183, 16.383515904, 0), x_dir=(0, -1, 0), z_dir=(-1, 0, 0)), Plane(origin=(18.773717067, 0.25, 0), x_dir=(-0.8660254037844384, -0.5000000000000006, 0), z_dir=(-0.5000000000000006, 0.8660254037844384, 0)), Plane(origin=(9.603364885, -16.133515904, 0), x_dir=(-0.866025403784439, 0.49999999999999933, 0), z_dir=(0.4999999999999994, 0.866025403784439, 0)), Plane(origin=(18.773717067, 0.25, -13.29), x_dir=(0, 0, 1), z_dir=(-0.5000000000000006, 0.8660254037844384, 0))) as fillet2_piece_15:
        with BuildLine():
            CenterArc((FILLET2_R, -FILLET2_R), FILLET2_R, 90, 90)
            Line((0, -FILLET2_R), (-FILLET2_R * 0.02, -FILLET2_R))
            Line((-FILLET2_R * 0.02, -FILLET2_R), (-FILLET2_R * 0.02, FILLET2_R * 0.02))
            Line((-FILLET2_R * 0.02, FILLET2_R * 0.02), (FILLET2_R, FILLET2_R * 0.02))
            Line((FILLET2_R, FILLET2_R * 0.02), (FILLET2_R, 0))
        make_face()
    extrude(amount=18.340704365, mode=Mode.SUBTRACT)
    with BuildSketch(Plane(origin=(0, 0, -13.29), x_dir=(1, 0, 0), z_dir=(0, -1, 0))) as fillet2_piece_16:
        with BuildLine():
            CenterArc((12.953762052, 0.5), FILLET2_R, 204.83458749, 65.16541251)
            Line((12.5, 0.29), (12.490924759, 0.2858))
            ThreePointArc((12.490924759, 0.2858), (12.49, 0.145), (12.49, 0))
            Line((12.49, 0), (12.5, -0.01))
            Line((12.5, -0.01), (12.953762052, -0.01))
            Line((12.953762052, -0.01), (12.953762052, 0))
        make_face()
    revolve(axis=Axis((0, 0, -13.29), (0, 0, 1)), mode=Mode.SUBTRACT)

    # Fillet3
    fillet3_edges = [part.edges().sort_by_distance(p)[0] for p in [
        (-12.5, 0, 0),
    ]]
    fillet(fillet3_edges, radius=FILLET3_R)


solid = part.part
